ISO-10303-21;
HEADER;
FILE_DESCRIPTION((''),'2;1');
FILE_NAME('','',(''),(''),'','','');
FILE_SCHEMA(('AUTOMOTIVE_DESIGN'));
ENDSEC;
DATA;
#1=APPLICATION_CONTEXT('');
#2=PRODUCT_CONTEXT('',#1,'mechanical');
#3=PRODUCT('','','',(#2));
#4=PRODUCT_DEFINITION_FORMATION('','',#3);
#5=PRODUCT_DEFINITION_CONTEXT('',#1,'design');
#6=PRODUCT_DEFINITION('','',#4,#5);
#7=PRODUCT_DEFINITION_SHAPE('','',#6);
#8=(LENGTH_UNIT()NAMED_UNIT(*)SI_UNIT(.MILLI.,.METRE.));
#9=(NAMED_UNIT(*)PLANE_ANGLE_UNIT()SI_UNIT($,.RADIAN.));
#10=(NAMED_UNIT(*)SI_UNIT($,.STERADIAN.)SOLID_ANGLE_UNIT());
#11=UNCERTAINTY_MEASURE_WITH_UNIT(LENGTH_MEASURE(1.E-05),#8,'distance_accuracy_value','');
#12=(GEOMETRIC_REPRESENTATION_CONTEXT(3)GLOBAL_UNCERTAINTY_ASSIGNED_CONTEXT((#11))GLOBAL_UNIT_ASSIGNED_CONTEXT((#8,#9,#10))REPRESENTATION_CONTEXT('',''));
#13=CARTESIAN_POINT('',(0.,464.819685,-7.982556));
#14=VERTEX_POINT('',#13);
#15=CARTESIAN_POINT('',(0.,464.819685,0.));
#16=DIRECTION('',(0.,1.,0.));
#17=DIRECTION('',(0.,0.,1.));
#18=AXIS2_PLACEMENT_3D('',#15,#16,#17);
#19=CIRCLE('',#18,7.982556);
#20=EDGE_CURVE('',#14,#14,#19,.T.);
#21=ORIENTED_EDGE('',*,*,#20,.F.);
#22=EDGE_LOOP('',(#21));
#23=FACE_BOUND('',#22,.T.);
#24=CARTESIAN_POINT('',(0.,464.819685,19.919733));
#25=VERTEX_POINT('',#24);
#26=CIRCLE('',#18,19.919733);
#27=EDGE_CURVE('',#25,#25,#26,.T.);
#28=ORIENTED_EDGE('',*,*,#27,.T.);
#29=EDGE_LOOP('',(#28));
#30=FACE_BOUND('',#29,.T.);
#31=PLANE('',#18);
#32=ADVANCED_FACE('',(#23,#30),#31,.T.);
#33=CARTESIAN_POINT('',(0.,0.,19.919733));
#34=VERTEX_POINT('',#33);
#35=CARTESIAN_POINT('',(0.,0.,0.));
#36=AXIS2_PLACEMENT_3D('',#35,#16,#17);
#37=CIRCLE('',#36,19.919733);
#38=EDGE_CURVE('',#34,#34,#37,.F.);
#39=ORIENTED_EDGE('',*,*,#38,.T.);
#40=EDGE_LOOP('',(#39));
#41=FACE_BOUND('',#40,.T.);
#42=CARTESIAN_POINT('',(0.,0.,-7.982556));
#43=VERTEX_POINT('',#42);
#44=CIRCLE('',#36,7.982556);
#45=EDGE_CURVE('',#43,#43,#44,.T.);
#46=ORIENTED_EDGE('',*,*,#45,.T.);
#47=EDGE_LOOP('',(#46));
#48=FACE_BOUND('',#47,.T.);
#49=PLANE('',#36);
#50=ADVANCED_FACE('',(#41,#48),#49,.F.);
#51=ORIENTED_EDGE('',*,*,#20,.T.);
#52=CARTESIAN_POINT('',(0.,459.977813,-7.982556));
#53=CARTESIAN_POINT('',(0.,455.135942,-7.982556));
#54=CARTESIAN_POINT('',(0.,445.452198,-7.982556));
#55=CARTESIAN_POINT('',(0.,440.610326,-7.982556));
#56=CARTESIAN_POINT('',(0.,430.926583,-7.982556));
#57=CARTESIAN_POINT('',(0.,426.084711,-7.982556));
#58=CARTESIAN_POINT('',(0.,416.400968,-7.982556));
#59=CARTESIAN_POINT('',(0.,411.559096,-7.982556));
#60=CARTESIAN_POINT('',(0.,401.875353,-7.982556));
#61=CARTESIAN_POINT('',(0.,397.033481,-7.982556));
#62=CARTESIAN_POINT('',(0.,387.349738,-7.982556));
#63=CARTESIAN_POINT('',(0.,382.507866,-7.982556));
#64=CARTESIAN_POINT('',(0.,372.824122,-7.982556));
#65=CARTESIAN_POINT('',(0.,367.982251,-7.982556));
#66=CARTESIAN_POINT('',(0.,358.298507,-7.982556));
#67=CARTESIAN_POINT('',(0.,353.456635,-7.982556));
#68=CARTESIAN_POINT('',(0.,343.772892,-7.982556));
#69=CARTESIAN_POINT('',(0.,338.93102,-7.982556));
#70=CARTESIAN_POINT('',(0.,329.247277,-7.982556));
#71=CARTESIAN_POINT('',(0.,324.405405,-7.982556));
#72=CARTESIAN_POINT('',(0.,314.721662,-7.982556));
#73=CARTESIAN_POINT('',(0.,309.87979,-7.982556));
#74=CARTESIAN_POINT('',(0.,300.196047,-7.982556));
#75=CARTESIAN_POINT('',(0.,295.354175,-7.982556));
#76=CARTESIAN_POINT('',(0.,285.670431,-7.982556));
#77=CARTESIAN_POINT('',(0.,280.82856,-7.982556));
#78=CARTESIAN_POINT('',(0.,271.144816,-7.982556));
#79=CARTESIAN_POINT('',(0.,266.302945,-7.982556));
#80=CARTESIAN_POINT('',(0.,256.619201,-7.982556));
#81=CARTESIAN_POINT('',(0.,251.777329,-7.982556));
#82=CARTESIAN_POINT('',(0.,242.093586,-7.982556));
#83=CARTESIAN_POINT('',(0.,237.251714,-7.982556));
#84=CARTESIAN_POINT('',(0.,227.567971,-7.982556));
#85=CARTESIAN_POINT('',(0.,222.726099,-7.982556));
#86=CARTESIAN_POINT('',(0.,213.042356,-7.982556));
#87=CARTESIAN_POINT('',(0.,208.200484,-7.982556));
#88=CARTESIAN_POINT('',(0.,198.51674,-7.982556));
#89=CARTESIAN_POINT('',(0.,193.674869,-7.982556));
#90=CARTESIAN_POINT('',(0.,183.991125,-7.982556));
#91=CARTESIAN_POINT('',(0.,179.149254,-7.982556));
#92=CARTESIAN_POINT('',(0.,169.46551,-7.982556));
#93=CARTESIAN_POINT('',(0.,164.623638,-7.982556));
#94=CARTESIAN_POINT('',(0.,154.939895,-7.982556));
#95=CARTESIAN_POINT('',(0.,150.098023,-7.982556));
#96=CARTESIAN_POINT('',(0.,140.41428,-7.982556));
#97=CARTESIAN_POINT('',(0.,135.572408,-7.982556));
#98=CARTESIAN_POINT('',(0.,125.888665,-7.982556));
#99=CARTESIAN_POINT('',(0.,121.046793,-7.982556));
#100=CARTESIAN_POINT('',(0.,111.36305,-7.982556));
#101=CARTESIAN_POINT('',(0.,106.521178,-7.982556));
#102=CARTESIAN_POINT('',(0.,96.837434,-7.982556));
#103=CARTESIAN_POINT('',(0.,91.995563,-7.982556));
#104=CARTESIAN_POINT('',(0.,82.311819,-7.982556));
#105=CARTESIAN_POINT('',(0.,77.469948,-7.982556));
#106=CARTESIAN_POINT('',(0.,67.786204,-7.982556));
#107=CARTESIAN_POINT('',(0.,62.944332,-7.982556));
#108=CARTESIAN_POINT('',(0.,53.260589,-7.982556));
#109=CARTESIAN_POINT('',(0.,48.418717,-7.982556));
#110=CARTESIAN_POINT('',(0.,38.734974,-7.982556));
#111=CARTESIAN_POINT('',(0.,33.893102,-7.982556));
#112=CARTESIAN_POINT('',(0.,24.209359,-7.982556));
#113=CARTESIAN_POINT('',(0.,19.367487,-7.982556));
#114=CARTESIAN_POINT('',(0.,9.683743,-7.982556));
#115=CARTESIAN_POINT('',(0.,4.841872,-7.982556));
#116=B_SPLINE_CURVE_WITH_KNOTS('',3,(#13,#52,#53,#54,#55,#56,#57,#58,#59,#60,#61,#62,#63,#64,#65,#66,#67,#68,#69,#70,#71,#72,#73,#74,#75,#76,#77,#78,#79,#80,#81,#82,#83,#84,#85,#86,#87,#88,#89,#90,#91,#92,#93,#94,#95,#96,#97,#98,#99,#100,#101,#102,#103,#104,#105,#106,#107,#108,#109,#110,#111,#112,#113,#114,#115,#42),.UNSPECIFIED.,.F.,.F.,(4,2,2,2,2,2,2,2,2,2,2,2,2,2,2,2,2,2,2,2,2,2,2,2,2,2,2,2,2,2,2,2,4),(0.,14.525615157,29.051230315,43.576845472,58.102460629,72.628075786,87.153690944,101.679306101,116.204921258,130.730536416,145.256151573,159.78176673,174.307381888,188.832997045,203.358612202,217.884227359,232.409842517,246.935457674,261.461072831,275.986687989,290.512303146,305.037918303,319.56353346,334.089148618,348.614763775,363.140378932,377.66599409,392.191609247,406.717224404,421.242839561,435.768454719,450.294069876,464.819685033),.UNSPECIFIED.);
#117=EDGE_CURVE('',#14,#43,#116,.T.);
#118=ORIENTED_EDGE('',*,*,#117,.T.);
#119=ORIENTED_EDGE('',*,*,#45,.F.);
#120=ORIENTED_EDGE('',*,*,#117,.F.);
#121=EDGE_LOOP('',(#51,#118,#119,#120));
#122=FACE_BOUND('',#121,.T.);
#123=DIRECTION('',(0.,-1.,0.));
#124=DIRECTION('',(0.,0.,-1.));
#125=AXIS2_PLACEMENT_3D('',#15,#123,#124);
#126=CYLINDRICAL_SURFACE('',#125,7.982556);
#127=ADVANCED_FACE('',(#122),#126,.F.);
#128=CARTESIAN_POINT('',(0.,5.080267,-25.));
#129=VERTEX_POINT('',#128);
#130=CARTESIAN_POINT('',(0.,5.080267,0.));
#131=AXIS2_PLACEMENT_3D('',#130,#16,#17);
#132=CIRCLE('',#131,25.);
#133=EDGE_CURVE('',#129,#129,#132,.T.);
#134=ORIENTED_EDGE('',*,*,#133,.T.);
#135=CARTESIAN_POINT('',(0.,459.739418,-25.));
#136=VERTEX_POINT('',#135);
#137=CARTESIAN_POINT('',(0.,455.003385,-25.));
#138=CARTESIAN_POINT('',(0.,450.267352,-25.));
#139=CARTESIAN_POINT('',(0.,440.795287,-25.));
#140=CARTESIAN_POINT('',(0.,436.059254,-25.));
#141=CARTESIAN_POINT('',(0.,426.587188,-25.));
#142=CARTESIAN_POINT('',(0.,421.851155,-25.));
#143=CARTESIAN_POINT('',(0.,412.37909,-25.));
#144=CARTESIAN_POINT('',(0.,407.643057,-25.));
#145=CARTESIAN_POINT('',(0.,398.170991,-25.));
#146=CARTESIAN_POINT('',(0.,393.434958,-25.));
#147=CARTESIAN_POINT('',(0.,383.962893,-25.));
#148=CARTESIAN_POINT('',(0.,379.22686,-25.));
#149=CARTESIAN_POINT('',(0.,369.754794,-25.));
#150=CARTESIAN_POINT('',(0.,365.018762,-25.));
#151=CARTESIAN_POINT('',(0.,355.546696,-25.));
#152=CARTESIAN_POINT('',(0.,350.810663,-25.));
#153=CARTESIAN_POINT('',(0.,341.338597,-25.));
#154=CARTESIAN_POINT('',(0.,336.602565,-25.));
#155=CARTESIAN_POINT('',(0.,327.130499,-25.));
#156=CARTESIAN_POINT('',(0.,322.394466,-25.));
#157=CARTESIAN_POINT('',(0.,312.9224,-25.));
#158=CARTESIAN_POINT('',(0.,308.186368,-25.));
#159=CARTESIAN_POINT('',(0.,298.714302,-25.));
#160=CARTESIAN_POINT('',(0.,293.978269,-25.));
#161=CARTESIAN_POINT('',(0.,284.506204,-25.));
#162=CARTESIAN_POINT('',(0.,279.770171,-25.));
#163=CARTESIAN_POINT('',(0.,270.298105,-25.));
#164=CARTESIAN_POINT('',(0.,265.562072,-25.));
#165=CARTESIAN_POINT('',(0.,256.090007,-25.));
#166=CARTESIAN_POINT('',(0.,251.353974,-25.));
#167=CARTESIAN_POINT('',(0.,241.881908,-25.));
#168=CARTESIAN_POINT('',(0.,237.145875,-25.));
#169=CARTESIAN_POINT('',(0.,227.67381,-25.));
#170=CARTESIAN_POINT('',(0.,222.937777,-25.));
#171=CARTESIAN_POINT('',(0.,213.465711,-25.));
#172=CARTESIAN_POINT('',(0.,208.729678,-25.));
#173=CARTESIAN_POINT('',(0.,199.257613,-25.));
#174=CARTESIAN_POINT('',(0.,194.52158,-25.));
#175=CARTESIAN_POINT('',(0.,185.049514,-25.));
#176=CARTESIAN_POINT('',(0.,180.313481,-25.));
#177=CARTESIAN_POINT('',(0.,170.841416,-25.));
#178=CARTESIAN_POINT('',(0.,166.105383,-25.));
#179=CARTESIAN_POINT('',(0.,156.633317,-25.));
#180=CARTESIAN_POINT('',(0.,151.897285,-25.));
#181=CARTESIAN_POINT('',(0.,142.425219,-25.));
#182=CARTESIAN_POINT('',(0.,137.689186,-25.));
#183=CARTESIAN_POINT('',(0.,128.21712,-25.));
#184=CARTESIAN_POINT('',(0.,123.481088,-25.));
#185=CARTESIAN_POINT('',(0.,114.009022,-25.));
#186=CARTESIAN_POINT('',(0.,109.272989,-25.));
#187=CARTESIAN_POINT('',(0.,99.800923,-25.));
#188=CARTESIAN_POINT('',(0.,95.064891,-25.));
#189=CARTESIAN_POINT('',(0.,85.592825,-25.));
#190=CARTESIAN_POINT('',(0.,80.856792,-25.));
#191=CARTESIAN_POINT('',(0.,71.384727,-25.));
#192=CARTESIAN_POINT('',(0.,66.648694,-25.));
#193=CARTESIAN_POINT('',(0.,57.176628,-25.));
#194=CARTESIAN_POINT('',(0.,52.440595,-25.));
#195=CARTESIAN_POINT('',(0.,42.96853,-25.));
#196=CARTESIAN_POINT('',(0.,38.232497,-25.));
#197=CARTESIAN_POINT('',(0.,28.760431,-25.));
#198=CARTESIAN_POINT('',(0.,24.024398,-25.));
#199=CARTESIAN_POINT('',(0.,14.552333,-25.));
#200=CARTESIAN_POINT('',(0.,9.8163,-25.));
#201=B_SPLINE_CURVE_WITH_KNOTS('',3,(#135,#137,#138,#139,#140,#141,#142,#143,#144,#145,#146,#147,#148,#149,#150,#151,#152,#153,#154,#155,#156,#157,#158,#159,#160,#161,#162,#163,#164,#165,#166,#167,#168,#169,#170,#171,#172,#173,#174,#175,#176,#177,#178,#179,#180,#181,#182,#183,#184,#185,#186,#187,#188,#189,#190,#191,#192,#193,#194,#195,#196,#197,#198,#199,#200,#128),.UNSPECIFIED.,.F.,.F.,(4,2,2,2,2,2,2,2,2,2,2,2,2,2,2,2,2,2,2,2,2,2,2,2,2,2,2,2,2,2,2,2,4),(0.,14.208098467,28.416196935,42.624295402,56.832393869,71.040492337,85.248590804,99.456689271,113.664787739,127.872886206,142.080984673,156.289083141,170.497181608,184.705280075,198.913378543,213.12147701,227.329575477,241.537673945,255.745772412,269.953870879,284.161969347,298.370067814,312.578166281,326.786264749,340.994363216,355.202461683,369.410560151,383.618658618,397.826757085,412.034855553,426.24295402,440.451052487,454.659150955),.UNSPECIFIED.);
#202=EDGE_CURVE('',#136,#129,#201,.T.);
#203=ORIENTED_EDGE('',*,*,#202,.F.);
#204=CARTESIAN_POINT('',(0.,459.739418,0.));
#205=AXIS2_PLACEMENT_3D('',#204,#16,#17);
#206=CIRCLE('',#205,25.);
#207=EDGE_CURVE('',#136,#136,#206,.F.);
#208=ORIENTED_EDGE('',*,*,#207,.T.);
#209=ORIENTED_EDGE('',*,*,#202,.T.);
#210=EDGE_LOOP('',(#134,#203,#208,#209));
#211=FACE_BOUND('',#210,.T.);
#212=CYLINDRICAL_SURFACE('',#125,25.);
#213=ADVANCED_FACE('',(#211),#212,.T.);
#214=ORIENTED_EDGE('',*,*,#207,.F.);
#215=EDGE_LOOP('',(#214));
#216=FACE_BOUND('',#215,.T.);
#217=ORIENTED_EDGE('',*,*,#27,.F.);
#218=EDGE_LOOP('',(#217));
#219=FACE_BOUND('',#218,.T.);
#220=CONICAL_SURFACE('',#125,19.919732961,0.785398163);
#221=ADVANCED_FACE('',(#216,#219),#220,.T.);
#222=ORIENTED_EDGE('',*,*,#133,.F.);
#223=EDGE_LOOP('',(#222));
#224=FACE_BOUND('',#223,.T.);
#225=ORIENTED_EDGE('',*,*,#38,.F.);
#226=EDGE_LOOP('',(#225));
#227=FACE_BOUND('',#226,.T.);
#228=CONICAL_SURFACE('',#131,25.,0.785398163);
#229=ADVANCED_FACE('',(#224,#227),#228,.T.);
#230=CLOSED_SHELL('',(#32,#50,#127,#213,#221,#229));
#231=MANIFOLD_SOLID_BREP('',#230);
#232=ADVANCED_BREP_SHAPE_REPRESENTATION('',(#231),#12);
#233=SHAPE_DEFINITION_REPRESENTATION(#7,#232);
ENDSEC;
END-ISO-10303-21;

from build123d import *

# Parameters (mm, degrees)
SKETCH1_R           = 25
BOSS_EXTRUDE1_DEPTH = 464.819685033
SKETCH2_R           = 7.98255586
CUT_EXTRUDE1_DEPTH  = 467.162353257
CHAMFER1_SIZE       = 5.080267039


with BuildPart() as part:
    # Sketch1 → Boss-Extrude1 (new body)
    with BuildSketch(Plane(origin=(0, 0, 0), x_dir=(1, 0, 0), z_dir=(0, 1, 0))):
        Circle(SKETCH1_R)
    extrude(amount=BOSS_EXTRUDE1_DEPTH)

    # Sketch2 → Cut-Extrude1 (cut, through all)
    with BuildSketch(Plane(origin=(0, 0, 0), x_dir=(1, 0, 0), z_dir=(0, 1, 0))):
        Circle(SKETCH2_R)
    extrude(amount=CUT_EXTRUDE1_DEPTH, mode=Mode.SUBTRACT)

    # Chamfer1
    chamfer1_edges = [part.edges().sort_by_distance(p)[0] for p in [
        (-25, 464.819685033, 0),
        (-25, 0, 0),
    ]]
    chamfer(chamfer1_edges, length=CHAMFER1_SIZE)


solid = part.part
